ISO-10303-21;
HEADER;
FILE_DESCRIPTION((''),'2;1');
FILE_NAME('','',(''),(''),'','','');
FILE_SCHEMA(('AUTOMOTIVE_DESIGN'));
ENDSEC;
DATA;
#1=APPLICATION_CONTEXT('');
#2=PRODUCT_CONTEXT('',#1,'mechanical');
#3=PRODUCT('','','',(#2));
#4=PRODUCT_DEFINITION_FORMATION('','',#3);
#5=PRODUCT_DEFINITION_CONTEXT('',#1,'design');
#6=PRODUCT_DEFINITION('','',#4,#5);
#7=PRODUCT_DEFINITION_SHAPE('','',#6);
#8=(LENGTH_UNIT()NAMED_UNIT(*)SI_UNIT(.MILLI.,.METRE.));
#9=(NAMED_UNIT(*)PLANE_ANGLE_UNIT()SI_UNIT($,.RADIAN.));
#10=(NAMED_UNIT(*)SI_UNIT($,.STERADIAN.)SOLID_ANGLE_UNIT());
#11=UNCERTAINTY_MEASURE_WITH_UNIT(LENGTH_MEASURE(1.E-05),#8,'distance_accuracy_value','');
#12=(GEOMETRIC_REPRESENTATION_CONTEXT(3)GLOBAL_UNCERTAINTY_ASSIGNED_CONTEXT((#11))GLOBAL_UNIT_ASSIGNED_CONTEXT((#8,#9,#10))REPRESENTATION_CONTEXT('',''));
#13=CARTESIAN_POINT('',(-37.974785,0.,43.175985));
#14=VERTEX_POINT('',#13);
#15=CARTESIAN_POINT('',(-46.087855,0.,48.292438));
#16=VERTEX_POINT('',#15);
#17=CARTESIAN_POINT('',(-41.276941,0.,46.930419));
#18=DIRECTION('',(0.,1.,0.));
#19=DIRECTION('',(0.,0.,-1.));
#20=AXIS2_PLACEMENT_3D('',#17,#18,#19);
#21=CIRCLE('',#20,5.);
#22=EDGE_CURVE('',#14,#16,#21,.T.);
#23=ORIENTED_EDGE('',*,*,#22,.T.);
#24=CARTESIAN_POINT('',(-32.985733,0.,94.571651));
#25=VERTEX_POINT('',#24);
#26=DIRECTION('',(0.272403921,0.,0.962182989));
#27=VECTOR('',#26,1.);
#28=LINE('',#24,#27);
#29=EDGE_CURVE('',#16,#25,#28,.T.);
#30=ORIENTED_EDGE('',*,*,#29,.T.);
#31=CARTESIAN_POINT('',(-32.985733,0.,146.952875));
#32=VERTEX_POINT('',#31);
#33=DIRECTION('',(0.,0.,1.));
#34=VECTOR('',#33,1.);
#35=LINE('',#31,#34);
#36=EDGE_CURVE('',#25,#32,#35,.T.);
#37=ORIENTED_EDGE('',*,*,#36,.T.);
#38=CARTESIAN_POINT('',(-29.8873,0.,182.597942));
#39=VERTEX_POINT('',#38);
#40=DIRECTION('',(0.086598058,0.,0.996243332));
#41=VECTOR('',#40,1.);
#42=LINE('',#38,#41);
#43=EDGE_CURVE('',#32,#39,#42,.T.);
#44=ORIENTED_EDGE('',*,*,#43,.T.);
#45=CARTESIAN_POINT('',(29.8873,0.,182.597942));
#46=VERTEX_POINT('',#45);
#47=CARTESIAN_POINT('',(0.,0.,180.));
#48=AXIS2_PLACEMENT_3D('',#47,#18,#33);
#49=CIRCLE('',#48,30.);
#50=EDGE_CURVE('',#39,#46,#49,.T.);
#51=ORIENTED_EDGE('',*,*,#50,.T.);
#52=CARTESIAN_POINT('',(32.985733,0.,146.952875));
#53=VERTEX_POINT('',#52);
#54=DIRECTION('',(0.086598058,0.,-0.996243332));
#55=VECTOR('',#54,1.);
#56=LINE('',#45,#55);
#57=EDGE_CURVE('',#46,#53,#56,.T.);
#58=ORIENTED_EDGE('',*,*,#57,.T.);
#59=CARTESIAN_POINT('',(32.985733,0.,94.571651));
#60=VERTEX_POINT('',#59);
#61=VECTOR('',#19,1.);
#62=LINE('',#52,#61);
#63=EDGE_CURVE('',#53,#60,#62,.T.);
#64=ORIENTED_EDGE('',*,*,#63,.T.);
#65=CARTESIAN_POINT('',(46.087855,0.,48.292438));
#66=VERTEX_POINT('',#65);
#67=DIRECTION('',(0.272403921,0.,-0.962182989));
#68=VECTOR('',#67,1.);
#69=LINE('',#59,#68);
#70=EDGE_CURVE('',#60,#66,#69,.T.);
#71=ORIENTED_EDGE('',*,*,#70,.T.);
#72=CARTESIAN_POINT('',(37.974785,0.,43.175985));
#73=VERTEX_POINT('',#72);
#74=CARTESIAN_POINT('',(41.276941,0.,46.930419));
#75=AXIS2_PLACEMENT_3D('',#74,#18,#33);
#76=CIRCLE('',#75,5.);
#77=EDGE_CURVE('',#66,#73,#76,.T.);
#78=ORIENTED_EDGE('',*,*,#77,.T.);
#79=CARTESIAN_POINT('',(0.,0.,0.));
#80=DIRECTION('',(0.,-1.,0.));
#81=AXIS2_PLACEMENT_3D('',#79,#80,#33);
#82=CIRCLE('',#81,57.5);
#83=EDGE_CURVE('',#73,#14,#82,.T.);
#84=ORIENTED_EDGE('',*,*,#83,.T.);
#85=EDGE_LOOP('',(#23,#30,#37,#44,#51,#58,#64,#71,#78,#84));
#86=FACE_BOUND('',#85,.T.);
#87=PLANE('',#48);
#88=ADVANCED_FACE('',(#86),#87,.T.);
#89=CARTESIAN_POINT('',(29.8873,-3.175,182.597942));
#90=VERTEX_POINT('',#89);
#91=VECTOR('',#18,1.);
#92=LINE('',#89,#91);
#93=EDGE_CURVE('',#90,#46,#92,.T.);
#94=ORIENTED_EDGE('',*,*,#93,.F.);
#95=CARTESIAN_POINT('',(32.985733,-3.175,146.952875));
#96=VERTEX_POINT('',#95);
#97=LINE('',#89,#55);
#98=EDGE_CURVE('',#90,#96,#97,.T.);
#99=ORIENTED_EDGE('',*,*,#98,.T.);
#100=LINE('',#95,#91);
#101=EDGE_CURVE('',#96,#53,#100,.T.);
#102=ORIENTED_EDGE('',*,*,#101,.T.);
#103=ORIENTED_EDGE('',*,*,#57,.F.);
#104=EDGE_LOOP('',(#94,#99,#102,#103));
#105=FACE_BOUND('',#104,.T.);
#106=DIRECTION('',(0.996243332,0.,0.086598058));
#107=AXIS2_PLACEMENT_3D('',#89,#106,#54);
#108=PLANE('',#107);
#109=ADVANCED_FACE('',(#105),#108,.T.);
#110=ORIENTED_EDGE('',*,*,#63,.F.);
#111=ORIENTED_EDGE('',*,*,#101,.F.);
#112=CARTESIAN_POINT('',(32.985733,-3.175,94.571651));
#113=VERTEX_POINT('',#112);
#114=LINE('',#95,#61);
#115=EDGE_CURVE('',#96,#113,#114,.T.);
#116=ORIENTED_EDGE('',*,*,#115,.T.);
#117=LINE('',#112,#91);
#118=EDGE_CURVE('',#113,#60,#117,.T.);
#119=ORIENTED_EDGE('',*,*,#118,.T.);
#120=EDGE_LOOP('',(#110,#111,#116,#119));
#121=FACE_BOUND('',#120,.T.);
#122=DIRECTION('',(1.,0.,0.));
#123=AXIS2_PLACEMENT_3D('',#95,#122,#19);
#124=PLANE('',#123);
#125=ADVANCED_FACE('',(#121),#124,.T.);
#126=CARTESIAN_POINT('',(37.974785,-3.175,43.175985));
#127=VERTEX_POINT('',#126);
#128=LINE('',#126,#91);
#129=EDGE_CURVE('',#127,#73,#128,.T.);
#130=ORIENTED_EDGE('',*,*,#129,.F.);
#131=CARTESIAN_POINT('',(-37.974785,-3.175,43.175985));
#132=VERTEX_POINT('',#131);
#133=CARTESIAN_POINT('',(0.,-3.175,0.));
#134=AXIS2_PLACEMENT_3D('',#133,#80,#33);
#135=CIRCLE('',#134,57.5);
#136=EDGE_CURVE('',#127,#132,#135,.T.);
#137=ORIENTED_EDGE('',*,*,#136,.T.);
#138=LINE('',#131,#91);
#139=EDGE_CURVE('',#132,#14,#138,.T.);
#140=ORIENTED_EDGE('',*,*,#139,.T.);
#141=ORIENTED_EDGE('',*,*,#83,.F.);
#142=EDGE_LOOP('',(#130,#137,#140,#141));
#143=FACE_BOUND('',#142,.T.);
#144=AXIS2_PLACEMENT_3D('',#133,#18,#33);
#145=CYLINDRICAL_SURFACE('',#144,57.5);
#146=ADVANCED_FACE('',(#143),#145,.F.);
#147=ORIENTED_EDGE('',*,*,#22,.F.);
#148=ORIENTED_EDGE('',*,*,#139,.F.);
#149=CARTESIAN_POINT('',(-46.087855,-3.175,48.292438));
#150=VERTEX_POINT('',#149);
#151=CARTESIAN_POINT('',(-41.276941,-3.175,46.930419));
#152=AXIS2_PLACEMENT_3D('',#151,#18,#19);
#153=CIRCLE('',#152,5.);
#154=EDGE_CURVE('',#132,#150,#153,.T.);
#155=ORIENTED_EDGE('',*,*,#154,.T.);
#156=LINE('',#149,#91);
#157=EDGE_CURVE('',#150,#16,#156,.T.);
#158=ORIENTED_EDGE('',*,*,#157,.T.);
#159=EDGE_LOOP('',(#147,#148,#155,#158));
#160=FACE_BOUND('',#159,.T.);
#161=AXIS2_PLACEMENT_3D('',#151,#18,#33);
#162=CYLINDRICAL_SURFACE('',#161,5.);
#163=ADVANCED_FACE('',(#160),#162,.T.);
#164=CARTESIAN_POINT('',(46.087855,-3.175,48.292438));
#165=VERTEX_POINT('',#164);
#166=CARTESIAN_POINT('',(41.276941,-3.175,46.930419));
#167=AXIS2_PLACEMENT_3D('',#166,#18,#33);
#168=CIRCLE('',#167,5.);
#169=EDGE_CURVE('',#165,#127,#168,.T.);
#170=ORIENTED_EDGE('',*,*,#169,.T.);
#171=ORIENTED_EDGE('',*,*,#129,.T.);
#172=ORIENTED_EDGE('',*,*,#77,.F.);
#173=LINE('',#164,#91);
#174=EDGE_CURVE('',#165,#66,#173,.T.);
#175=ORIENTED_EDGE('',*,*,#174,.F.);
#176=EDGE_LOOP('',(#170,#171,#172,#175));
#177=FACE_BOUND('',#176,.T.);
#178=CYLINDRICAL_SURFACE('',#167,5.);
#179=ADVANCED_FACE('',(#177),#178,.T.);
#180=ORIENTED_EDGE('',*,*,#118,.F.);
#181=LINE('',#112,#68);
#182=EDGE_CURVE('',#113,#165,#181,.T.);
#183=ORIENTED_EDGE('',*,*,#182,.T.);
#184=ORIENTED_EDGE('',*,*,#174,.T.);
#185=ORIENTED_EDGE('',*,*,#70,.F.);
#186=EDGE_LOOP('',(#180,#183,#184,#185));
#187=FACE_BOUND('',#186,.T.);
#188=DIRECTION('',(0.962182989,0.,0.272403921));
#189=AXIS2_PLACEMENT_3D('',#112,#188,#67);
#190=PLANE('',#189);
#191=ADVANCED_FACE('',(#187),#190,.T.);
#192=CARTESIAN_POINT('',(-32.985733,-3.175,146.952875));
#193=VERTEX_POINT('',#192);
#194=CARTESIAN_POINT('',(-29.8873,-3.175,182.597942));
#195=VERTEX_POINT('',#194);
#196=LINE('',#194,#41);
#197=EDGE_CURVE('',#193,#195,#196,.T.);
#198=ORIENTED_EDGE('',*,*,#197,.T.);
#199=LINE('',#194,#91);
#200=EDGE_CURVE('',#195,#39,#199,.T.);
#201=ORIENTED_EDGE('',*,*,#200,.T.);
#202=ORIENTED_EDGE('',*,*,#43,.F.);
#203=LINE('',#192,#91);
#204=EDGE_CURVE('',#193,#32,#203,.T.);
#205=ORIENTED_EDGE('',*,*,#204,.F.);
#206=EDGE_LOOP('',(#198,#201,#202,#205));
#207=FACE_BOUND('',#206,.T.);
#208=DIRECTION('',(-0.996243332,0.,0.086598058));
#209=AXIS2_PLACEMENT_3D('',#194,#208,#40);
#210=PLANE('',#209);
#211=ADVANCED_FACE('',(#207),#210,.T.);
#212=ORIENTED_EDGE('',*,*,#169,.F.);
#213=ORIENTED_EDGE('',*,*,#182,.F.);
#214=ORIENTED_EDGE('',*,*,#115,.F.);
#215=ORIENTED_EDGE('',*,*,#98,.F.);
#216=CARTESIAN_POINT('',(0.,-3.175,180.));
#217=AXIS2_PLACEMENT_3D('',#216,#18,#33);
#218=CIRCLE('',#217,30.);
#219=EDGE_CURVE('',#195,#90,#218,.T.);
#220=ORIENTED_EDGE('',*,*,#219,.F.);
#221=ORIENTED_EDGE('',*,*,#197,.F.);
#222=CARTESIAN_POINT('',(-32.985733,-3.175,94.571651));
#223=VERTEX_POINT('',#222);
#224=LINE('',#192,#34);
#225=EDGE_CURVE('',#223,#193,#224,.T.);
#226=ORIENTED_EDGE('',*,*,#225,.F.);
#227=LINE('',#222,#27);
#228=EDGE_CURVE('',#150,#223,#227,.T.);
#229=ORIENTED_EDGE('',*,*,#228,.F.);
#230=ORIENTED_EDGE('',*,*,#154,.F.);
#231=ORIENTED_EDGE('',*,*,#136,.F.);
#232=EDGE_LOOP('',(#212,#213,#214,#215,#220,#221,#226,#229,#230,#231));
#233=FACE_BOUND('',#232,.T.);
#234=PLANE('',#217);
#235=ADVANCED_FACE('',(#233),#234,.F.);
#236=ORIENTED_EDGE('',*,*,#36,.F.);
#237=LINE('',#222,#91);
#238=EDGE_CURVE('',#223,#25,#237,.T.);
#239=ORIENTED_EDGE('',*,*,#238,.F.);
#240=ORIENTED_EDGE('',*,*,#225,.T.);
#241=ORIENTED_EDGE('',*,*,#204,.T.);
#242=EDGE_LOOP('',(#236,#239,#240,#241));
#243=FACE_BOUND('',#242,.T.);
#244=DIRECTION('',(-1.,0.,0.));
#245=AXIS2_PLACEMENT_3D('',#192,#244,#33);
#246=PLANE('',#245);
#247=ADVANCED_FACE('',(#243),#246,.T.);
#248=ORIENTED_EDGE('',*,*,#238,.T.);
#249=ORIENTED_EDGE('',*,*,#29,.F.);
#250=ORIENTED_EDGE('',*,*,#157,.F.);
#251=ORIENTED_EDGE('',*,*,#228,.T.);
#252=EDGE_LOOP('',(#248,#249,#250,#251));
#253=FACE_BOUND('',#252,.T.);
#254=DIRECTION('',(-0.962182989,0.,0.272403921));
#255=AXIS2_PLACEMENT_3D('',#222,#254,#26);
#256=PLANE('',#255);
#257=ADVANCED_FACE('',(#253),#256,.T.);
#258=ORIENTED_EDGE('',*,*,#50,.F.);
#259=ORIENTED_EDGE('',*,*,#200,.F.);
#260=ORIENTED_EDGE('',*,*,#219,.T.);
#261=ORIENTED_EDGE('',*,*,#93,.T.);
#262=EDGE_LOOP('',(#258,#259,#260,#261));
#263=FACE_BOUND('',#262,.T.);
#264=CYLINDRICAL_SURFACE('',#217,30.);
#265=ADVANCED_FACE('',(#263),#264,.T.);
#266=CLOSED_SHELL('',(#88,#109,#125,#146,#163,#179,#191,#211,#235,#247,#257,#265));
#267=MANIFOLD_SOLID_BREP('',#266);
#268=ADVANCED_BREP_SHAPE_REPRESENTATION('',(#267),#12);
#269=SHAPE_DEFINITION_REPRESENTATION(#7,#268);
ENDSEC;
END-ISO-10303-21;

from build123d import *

# Parameters (mm, degrees)
BASE_FLANGE1_DEPTH = 3.175


# Sheet-metal steps are written as plain solids
with BuildPart() as part:
    # Sketch1 → Base-Flange1 (new body)
    with BuildSketch(Plane(origin=(0, 0, 0), x_dir=(1, 0, 0), z_dir=(0, 1, 0))):
        with BuildLine():
            Line((-29.887299957, -182.597941739), (-32.985733317, -146.952874795))
            Line((-32.985733317, -146.952874795), (-32.985733317, -94.571650999))
            Line((-32.985733317, -94.571650999), (-46.087855458, -48.292438117))
            ThreePointArc((-46.087855458, -48.292438117), (-43.944076056, -42.701188324), (-37.974785272, -43.175985032))
            ThreePointArc((-37.974785272, -43.175985032), (0, -57.5), (37.974785272, -43.175985032))
            ThreePointArc((37.974785272, -43.175985032), (43.944076056, -42.701188324), (46.087855458, -48.292438117))
            Line((46.087855458, -48.292438117), (32.985733317, -94.571650999))
            Line((32.985733317, -94.571650999), (32.985733317, -146.952874795))
            Line((32.985733317, -146.952874795), (29.887299957, -182.597941739))
            ThreePointArc((29.887299957, -182.597941739), (0, -210), (-29.887299957, -182.597941739))
        make_face()
    extrude(amount=-BASE_FLANGE1_DEPTH)


solid = part.part
